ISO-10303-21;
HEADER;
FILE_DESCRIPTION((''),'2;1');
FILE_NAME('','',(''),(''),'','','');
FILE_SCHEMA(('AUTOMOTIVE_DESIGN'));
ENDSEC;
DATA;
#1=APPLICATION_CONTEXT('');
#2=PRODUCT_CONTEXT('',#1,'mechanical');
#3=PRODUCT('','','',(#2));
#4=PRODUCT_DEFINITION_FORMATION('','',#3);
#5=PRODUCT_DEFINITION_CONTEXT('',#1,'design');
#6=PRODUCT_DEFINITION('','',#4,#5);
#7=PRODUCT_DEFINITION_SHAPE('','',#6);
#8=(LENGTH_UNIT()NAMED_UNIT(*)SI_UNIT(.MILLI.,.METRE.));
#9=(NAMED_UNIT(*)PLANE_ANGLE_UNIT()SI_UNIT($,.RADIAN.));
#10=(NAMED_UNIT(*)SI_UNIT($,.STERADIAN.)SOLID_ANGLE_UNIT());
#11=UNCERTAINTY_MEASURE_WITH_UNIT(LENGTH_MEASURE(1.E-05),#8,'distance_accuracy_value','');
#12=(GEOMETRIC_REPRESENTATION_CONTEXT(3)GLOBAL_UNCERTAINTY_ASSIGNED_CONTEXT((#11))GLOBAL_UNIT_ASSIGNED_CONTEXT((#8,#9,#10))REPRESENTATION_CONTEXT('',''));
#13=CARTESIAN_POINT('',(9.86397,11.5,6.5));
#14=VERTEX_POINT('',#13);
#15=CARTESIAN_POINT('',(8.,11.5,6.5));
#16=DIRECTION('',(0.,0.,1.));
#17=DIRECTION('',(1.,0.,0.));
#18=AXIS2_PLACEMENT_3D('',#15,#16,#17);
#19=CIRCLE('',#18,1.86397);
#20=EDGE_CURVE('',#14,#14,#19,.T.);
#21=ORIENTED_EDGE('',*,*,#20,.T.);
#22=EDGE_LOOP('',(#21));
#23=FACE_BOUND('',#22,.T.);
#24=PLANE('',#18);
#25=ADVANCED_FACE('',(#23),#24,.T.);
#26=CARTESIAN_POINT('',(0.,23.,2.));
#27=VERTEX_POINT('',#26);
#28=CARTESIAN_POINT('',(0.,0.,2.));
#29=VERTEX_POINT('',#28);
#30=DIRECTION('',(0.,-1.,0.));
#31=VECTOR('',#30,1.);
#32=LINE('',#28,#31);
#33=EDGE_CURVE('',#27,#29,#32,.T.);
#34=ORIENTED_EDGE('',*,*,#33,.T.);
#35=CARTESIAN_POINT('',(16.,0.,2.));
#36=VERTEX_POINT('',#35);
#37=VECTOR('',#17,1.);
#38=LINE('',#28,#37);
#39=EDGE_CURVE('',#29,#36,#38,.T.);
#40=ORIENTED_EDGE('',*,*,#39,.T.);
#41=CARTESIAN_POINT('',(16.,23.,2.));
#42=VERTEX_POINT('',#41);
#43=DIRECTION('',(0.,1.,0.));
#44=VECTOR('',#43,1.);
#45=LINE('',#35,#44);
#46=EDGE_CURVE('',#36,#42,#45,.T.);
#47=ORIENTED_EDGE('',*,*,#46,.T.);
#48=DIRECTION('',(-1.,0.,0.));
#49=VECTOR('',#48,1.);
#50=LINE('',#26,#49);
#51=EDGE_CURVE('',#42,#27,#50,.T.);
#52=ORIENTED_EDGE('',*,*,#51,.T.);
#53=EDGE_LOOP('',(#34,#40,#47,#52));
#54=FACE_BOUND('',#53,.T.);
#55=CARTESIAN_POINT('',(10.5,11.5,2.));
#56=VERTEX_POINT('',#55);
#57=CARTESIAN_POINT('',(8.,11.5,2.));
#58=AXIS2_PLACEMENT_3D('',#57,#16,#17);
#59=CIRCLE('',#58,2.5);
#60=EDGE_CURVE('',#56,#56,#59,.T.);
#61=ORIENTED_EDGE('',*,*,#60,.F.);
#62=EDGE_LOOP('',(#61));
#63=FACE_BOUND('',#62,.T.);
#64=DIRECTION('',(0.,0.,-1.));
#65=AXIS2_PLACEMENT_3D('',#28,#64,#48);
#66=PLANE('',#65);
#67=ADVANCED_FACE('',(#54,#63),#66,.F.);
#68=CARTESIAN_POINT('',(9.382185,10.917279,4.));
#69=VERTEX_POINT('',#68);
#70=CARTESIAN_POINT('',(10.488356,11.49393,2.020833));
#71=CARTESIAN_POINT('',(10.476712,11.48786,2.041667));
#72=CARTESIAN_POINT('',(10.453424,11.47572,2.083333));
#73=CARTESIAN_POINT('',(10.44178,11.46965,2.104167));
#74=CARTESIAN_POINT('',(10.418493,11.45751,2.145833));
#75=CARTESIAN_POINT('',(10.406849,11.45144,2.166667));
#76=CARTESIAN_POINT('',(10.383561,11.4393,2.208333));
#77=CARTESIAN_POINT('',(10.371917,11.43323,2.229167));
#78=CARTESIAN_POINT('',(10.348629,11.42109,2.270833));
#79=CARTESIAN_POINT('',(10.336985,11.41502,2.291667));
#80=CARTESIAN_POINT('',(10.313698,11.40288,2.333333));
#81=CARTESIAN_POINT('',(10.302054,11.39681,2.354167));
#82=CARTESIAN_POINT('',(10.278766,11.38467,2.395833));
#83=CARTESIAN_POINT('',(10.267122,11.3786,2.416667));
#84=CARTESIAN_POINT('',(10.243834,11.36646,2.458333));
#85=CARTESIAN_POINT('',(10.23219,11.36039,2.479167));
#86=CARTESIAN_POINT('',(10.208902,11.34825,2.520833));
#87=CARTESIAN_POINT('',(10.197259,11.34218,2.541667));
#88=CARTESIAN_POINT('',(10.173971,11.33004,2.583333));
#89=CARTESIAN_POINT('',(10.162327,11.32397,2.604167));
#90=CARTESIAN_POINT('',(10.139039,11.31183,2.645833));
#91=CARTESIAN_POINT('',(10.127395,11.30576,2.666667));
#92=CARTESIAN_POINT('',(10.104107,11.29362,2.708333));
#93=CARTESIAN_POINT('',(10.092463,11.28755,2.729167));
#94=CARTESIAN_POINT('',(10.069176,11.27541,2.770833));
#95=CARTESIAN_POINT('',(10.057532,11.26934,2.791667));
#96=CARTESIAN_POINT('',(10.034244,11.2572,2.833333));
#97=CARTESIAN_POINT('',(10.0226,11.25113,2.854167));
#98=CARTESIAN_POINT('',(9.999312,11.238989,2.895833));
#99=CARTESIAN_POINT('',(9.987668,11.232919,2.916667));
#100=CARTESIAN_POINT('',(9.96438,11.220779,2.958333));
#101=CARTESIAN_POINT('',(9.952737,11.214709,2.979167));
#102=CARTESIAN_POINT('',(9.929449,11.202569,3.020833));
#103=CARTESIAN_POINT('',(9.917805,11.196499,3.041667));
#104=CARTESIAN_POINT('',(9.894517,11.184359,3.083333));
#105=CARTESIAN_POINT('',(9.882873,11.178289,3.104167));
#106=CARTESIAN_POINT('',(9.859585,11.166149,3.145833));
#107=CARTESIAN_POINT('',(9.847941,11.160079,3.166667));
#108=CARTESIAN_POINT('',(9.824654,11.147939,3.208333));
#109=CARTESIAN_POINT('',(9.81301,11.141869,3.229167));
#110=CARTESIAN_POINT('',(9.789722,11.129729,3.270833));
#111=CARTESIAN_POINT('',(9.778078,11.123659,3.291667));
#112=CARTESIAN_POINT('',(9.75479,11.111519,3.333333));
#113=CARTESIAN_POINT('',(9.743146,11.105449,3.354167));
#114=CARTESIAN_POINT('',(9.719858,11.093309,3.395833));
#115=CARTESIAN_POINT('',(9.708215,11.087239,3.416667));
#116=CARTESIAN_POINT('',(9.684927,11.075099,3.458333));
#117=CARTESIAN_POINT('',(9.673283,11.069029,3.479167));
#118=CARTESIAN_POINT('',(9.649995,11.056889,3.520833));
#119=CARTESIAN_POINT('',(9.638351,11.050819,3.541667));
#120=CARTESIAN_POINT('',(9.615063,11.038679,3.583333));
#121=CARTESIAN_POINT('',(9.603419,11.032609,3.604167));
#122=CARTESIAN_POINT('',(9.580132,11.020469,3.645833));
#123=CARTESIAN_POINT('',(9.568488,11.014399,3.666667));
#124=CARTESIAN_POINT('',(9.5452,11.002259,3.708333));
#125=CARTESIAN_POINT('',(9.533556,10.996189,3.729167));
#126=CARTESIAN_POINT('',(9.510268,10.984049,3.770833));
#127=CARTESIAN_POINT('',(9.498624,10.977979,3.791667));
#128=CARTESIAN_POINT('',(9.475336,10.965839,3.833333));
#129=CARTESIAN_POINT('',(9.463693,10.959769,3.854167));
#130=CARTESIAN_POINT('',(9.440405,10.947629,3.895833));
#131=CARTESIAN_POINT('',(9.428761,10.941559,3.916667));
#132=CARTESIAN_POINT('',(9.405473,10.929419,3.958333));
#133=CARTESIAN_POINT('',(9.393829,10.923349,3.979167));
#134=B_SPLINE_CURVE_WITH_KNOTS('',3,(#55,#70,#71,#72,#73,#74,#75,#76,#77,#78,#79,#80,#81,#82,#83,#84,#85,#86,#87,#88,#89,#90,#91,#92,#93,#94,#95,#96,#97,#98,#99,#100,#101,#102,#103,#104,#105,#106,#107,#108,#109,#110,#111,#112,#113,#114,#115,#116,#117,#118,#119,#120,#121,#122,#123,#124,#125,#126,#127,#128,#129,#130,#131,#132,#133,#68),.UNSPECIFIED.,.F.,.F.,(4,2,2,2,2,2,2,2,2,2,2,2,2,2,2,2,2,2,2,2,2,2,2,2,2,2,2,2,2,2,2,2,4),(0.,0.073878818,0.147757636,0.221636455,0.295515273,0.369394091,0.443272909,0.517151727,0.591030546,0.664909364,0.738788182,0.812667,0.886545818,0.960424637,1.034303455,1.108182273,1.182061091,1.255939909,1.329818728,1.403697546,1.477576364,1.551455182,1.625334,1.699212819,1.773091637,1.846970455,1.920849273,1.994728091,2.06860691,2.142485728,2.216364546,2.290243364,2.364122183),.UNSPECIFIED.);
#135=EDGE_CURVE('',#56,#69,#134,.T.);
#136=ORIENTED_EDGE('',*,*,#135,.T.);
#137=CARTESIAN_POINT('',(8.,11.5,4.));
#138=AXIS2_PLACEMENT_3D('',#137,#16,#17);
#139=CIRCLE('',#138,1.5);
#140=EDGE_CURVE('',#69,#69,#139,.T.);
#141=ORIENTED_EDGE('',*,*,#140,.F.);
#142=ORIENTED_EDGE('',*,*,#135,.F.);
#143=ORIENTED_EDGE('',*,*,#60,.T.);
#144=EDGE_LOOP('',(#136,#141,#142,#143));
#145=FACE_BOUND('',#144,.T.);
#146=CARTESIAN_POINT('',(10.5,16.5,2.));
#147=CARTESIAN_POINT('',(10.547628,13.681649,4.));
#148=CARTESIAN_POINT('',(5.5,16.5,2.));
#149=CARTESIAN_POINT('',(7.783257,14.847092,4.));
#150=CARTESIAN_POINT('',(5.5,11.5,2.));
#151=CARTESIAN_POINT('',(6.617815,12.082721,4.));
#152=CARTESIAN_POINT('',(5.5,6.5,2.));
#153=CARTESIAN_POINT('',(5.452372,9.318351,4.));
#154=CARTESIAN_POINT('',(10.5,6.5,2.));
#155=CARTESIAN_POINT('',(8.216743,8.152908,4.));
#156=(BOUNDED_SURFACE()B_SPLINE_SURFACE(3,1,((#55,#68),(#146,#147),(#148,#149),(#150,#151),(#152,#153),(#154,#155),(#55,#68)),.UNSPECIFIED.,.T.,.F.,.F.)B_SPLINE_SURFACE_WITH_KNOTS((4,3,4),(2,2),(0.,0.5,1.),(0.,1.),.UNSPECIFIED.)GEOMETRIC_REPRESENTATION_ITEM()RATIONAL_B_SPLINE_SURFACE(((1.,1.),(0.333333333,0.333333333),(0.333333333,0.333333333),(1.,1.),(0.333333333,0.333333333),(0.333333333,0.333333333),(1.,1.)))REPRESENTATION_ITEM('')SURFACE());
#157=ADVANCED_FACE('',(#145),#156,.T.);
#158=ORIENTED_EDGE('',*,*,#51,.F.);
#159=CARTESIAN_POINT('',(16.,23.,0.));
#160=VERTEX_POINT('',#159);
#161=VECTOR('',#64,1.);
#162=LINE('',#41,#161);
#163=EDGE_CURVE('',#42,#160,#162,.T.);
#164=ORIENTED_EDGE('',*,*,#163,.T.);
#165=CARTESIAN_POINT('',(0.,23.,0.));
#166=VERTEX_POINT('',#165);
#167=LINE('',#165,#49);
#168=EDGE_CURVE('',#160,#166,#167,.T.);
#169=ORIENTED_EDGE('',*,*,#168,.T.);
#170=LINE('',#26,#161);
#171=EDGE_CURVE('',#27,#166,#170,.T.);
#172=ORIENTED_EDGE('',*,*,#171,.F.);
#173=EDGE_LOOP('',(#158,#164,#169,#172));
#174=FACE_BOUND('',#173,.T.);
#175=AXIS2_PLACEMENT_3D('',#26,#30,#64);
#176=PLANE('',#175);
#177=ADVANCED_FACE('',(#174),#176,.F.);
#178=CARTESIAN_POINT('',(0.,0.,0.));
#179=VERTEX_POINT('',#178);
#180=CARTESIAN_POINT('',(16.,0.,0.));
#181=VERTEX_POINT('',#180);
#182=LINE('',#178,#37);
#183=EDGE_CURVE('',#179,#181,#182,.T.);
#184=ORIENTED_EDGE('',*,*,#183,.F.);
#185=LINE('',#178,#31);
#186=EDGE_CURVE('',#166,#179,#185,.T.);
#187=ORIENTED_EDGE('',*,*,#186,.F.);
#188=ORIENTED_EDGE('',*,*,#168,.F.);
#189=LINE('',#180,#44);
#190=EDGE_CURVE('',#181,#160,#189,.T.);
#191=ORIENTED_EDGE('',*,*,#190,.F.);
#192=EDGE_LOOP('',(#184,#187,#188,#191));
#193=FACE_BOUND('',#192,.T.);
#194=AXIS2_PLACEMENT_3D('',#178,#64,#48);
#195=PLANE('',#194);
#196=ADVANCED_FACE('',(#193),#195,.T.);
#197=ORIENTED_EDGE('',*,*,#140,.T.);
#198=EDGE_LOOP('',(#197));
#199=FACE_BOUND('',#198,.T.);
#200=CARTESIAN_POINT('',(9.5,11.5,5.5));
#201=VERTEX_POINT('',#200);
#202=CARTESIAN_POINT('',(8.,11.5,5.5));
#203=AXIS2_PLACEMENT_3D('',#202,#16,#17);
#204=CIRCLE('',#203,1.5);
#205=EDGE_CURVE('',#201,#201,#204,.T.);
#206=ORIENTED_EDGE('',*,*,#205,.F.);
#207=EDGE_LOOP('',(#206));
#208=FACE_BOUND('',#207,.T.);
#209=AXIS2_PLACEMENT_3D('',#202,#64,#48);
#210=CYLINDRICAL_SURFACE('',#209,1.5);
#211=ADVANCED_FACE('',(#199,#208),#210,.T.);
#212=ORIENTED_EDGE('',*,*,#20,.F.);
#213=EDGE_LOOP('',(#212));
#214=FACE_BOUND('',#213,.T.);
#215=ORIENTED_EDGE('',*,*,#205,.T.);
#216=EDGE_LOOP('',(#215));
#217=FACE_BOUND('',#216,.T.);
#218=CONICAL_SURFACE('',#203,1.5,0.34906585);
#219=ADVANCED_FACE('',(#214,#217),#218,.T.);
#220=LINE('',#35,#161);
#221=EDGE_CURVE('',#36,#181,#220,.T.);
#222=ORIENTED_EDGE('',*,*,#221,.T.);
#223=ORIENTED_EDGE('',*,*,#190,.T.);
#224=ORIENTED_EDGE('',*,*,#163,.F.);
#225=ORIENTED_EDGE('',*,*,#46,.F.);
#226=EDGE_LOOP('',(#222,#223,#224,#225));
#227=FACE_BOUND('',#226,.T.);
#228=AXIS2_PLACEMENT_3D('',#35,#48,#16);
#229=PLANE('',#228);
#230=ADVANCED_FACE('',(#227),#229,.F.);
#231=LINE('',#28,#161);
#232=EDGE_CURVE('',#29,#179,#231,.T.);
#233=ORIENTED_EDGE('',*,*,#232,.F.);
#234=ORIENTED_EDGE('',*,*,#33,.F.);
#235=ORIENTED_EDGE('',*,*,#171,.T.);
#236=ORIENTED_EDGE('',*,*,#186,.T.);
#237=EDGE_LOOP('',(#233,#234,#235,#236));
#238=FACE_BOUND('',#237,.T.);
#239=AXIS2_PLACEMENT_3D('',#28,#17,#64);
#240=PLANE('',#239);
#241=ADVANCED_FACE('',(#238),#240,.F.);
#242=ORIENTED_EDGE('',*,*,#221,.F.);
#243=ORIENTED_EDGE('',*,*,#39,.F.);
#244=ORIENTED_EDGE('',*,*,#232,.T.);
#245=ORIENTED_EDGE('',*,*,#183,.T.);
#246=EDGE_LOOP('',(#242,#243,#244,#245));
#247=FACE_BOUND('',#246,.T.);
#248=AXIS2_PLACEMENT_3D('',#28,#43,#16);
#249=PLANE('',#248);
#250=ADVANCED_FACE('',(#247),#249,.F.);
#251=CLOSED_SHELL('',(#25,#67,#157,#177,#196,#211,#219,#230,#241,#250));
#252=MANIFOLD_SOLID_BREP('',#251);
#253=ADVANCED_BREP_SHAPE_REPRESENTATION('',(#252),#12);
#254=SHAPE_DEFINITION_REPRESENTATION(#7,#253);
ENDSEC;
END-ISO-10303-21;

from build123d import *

# Parameters (mm, degrees)
SKETCH1_W           = 16
SKETCH1_H           = 23
BOSS_EXTRUDE1_DEPTH = 2
SKETCH6_R           = 1.5
BOSS_EXTRUDE3_DEPTH = 1.5
SKETCH7_R           = 1.5
BOSS_EXTRUDE4_DEPTH = 1
BOSS_EXTRUDE4_DRAFT = -20


with BuildPart() as part:
    # Sketch1 → Boss-Extrude1 (new body)
    with BuildSketch(Plane.XY):
        with Locations((8, 11.5)):
            Rectangle(SKETCH1_W, SKETCH1_H)
    extrude(amount=BOSS_EXTRUDE1_DEPTH)

    # Loft1: read off the stored shape, not the designer's step
    # Loft1: loft between two sections, ruled curve by curve
    loft1_from = [
        Edge.make_bspline([(10.5, 11.5, 2), (10.5, 16.5, 2), (5.5, 16.5, 2), (5.5, 11.5, 2), (5.5, 6.5, 2), (10.5, 6.5, 2), (10.5, 11.5, 2)], [0, 0, 0, 0, 0.5, 0.5, 0.5, 1, 1, 1, 1], 3, [1, 0.333333333, 0.333333333, 1, 0.333333333, 0.333333333, 1]),
    ]
    loft1_to = [
        Edge.make_bspline([(9.382185261, 10.91727888, 4), (10.547627501, 13.681649403, 4), (7.783256979, 14.847091642, 4), (6.617814739, 12.08272112, 4), (5.452372499, 9.318350597, 4), (8.216743021, 8.152908358, 4), (9.382185261, 10.91727888, 4)], [0, 0, 0, 0, 0.5, 0.5, 0.5, 1, 1, 1, 1], 3, [1, 0.333333333, 0.333333333, 1, 0.333333333, 0.333333333, 1]),
    ]
    loft1 = Solid(Shell([*[Face.make_surface_from_curves(loft1_from[k], loft1_to[k]) for k in range(1)], Face(Wire(loft1_from)), Face(Wire(loft1_to))]))
    add(loft1)

    # Sketch6 → Boss-Extrude3 (add)
    with BuildSketch(Plane.XY.offset(4)):
        with Locations(Location((8, 11.5, 0), (0, 0, 337.14))):
            Circle(SKETCH6_R)
    extrude(amount=BOSS_EXTRUDE3_DEPTH)


with BuildPart() as boss_extrude4_tool:
    # Sketch7 → Boss-Extrude4 (with draft: the straight prism first)
    with BuildSketch(Plane.XY.offset(5.5)):
        with Locations(Location((8, 11.5, 0), (0, 0, 337.14))):
            Circle(SKETCH7_R)
    extrude(amount=BOSS_EXTRUDE4_DEPTH)
    # Boss-Extrude4: the draft: its side faces are tilted about the plane it starts from
    boss_extrude4_sides = [boss_extrude4_tool.faces().sort_by_distance(p)[0] for p in [
        (6.617814739, 12.08272112, 6),
    ]]
    draft(boss_extrude4_sides, Plane.XY.offset(5.5), BOSS_EXTRUDE4_DRAFT)


with BuildPart() as part_1:
    add(part.part)

    # Boss-Extrude4: add boss_extrude4_tool
    add(boss_extrude4_tool.part)


solid = part_1.part
